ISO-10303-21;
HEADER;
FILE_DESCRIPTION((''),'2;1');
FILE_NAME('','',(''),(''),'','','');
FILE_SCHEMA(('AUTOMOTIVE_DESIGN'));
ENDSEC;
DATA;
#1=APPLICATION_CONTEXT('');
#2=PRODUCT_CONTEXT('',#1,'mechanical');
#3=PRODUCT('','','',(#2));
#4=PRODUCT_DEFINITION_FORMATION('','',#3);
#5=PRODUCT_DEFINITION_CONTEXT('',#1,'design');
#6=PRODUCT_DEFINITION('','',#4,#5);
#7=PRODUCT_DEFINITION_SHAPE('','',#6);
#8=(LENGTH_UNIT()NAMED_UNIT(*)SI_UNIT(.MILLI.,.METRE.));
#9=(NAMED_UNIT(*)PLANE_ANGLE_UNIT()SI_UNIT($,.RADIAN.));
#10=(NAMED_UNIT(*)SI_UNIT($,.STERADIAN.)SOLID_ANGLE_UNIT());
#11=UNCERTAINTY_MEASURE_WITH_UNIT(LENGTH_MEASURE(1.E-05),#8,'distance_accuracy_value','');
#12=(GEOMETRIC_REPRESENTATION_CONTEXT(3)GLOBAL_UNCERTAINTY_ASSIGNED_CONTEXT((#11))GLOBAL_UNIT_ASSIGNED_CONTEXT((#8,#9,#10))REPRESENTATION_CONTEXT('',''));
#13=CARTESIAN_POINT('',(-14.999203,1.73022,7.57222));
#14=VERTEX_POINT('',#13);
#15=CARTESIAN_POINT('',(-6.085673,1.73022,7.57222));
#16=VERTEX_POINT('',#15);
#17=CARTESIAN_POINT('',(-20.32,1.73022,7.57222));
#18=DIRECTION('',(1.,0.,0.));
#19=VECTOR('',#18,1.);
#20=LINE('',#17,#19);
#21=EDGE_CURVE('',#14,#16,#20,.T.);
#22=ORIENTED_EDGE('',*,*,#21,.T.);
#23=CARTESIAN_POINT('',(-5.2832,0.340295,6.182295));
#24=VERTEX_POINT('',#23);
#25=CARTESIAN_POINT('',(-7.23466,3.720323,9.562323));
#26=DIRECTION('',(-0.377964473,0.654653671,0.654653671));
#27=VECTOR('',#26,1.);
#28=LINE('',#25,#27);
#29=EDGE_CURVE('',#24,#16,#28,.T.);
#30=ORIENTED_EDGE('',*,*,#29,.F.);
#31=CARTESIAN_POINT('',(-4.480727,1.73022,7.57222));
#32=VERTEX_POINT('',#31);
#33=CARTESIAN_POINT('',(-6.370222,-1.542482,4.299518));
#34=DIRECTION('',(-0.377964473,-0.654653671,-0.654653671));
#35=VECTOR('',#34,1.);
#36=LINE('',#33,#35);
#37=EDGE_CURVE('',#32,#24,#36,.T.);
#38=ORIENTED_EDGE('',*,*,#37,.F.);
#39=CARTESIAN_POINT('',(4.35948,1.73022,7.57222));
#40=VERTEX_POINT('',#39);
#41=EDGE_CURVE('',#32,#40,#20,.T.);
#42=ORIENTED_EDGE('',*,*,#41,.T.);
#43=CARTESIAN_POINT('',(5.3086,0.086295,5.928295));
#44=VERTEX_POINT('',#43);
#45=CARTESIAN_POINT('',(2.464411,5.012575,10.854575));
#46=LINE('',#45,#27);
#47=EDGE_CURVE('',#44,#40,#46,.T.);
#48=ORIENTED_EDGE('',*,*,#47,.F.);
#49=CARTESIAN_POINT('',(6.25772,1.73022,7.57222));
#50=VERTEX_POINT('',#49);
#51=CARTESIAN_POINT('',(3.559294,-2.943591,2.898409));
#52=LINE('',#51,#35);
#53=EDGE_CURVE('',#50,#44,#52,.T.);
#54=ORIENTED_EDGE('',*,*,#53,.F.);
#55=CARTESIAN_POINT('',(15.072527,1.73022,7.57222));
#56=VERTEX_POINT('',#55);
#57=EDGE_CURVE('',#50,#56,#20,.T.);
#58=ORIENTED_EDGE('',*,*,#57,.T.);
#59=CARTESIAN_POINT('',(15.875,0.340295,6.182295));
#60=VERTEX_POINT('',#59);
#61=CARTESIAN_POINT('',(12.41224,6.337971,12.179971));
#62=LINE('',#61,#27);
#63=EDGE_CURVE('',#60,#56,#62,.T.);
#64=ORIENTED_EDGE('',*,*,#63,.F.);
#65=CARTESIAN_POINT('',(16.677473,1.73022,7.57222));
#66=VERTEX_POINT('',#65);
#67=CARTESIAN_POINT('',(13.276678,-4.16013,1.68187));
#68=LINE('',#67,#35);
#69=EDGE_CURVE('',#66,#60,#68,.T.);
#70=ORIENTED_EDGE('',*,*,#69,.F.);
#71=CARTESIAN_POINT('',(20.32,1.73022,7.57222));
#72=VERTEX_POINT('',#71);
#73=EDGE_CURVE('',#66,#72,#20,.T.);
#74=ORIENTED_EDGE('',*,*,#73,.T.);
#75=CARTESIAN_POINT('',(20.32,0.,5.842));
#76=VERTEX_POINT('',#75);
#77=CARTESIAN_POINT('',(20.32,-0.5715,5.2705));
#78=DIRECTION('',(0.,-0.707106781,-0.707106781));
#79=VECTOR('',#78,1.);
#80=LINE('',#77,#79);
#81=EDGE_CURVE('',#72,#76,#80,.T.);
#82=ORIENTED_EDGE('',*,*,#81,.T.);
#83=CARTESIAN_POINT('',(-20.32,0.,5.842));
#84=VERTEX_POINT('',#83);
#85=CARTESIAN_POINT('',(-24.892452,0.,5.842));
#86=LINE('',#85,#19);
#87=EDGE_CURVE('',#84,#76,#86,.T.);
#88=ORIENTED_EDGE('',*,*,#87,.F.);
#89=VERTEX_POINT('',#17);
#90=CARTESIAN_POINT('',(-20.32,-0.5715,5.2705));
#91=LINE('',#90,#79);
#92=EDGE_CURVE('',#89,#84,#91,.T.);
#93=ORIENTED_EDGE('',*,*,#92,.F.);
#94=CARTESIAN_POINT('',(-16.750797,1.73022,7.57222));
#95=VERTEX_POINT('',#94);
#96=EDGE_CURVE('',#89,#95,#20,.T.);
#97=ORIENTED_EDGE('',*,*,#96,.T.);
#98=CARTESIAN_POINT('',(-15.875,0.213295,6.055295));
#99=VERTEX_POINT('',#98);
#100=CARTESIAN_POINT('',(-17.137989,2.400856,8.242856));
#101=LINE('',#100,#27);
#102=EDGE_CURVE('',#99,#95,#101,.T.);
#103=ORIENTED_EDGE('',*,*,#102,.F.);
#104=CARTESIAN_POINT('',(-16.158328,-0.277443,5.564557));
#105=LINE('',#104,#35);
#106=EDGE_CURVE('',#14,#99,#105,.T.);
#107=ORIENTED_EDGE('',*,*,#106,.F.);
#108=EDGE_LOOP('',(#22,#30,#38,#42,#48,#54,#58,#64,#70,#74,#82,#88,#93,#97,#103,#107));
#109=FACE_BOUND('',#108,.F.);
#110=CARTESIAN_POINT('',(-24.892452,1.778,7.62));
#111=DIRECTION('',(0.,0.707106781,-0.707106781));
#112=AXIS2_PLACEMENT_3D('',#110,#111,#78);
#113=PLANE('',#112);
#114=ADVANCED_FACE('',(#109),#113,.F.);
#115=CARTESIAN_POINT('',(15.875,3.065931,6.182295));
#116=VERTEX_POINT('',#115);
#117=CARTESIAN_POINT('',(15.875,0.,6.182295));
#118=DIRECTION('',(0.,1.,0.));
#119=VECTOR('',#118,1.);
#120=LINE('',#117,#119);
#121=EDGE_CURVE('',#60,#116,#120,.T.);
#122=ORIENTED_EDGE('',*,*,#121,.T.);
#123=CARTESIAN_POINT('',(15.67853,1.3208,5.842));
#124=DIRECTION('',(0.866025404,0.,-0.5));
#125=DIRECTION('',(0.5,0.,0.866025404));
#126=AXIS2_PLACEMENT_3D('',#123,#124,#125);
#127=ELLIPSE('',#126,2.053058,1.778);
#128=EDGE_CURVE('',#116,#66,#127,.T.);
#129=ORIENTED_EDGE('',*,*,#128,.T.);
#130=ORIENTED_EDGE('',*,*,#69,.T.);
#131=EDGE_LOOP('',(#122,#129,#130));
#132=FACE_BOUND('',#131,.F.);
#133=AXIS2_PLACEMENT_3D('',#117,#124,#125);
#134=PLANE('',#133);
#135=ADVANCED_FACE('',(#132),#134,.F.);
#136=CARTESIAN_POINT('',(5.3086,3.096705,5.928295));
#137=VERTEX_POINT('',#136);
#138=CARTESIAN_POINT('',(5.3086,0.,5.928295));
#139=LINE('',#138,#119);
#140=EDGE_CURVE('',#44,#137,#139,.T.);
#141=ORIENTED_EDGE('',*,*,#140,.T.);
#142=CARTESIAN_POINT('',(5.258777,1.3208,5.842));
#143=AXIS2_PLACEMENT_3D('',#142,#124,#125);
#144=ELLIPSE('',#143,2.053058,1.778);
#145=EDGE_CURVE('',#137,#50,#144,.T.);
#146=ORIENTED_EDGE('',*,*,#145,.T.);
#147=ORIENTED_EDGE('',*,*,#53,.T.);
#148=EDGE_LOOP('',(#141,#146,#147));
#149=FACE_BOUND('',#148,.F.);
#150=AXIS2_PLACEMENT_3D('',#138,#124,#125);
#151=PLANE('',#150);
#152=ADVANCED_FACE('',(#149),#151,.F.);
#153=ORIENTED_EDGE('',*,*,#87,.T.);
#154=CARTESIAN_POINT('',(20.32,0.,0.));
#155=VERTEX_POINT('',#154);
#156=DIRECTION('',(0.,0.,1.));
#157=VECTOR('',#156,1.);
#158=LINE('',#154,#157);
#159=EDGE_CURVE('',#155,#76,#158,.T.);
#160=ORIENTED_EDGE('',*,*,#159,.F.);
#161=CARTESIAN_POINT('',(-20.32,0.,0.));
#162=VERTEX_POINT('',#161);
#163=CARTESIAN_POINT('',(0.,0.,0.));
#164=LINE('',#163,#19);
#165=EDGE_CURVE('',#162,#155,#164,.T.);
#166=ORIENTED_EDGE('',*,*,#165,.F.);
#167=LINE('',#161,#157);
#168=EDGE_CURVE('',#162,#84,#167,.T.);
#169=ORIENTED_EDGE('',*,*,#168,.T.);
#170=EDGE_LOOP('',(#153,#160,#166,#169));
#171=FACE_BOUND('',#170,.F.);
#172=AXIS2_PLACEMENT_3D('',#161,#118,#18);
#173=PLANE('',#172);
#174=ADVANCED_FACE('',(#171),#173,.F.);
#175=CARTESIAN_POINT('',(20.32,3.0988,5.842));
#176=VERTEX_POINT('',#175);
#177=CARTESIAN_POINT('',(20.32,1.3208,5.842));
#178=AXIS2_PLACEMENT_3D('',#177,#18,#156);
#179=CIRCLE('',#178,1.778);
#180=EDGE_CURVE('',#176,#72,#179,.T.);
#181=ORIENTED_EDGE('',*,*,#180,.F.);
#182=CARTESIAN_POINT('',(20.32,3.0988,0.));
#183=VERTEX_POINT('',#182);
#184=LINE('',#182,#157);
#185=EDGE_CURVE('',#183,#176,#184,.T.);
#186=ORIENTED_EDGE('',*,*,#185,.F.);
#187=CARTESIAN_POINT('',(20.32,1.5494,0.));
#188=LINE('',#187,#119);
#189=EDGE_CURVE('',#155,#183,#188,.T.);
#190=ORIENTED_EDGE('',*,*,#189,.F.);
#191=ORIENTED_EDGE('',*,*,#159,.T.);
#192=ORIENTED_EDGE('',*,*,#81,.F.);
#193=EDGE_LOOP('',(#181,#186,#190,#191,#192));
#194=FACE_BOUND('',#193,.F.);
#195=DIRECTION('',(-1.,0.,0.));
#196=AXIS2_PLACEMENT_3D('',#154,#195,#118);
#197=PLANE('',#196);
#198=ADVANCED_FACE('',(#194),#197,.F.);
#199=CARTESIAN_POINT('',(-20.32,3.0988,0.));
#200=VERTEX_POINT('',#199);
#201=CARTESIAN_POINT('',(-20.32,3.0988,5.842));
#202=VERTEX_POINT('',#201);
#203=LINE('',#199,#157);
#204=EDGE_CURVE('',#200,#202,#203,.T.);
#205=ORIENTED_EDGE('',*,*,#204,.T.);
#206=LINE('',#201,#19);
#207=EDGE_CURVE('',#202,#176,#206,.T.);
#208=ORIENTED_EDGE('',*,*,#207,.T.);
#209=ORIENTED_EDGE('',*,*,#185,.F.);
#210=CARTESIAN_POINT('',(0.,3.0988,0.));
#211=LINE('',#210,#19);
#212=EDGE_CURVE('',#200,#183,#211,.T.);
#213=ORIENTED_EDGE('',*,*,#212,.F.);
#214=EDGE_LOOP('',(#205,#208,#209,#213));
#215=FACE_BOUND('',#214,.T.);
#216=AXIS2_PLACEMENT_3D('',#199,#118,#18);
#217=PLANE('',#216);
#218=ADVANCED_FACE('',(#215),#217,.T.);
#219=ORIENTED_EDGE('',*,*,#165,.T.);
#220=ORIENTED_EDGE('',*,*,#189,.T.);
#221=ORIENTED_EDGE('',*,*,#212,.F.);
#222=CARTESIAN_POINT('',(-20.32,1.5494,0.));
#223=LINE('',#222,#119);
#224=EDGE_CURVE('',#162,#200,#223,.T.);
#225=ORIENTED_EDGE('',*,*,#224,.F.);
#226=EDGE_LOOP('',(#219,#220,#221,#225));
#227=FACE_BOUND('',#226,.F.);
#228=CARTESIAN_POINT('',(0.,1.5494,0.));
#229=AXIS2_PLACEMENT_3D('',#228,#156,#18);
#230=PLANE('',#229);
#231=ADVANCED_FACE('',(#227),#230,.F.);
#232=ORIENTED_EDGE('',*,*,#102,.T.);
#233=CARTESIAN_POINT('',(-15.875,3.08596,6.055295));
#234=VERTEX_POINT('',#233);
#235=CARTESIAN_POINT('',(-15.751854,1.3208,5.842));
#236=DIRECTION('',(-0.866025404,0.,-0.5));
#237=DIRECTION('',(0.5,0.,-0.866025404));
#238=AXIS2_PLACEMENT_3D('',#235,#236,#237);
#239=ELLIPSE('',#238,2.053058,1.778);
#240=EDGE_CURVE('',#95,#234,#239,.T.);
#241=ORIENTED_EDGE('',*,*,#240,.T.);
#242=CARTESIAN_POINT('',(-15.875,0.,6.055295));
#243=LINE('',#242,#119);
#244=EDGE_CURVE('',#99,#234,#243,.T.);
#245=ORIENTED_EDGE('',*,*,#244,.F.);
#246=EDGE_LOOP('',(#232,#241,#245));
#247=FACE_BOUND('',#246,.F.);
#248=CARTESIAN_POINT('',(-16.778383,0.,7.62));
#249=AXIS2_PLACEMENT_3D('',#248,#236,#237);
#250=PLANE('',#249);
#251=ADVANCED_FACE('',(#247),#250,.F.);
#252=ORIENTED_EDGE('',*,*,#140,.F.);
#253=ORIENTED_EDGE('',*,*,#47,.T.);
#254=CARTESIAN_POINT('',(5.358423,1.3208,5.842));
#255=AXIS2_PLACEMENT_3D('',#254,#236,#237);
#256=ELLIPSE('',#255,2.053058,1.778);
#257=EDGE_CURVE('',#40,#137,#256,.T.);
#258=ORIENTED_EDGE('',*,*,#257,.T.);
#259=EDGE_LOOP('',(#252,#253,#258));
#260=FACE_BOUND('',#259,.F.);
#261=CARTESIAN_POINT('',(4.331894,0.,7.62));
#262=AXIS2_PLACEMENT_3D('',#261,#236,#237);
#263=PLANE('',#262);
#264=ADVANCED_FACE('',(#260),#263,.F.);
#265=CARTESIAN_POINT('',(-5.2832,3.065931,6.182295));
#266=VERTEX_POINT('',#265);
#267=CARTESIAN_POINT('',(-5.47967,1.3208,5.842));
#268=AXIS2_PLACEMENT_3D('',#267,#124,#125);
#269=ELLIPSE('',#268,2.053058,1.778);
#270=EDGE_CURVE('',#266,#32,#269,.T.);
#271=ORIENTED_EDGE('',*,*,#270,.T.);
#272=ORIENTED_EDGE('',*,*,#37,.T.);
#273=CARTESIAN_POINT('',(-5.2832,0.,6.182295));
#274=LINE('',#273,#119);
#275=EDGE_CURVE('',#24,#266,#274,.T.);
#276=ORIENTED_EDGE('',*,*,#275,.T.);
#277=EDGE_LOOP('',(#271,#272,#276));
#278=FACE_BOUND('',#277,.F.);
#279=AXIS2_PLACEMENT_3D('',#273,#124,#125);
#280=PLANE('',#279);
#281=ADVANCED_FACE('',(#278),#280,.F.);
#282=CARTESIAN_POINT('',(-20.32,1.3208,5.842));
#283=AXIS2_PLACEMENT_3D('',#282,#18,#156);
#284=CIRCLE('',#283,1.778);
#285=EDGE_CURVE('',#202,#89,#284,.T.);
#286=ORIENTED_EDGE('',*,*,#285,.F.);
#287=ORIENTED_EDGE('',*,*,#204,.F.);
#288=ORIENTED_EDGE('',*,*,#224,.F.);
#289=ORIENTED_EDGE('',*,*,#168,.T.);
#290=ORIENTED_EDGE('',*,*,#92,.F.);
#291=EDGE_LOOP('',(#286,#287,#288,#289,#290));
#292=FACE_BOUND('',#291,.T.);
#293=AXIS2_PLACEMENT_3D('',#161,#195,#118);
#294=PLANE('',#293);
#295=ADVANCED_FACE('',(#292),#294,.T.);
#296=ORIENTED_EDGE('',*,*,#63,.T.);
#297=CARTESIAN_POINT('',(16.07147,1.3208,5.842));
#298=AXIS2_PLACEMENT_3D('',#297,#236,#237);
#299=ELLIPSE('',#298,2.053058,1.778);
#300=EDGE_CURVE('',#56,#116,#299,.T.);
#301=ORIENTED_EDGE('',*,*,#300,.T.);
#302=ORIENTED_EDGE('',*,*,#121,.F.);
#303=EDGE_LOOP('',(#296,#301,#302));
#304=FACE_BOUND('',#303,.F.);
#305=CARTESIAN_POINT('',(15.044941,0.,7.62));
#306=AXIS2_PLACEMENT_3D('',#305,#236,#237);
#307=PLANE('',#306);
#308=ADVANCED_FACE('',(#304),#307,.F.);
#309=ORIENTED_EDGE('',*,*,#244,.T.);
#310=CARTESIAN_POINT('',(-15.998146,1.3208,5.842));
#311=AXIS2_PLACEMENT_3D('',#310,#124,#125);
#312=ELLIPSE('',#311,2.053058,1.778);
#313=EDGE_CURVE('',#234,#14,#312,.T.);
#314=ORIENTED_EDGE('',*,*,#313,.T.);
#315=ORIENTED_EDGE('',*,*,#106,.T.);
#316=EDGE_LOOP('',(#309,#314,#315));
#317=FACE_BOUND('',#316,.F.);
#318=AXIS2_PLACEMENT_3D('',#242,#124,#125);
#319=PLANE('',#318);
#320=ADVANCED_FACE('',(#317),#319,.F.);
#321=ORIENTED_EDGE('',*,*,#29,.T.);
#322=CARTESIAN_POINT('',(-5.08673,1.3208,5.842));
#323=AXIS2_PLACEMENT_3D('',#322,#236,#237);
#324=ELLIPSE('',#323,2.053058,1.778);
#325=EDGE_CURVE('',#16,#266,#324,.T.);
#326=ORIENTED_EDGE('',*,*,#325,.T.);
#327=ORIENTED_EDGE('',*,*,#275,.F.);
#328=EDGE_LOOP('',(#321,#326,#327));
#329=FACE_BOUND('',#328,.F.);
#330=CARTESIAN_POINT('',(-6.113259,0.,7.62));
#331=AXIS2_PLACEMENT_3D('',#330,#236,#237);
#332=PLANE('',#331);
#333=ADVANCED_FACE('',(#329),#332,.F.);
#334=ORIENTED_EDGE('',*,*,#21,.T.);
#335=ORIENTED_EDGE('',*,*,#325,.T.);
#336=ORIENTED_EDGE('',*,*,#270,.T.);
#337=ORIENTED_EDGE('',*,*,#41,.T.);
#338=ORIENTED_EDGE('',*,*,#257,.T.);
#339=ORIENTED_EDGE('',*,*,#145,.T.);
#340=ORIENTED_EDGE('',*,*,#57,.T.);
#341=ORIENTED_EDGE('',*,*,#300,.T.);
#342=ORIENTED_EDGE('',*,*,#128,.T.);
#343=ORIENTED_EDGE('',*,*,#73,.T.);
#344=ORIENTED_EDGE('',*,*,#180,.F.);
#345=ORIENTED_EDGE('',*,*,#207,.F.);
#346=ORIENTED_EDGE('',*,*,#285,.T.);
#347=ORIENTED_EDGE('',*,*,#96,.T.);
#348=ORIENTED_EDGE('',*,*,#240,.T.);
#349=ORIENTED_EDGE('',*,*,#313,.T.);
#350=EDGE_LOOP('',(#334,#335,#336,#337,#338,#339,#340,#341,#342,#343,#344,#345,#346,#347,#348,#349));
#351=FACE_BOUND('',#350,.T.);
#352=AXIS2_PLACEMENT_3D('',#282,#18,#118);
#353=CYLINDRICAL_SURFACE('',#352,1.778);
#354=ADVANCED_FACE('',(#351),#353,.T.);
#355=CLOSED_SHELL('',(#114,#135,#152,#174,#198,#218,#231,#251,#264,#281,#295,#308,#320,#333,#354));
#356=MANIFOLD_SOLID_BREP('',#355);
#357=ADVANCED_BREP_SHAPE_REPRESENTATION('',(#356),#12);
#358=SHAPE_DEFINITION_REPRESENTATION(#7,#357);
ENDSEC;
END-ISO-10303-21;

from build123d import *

# Parameters (mm, degrees)
F0_W        = 40.64
F0_H        = 3.0988
F1_DEPTH    = 7.62
F3_R        = 1.778
F4_T1_DEPTH = 49.7849047052
F5_DEPTH    = 25.4


# Not quite as in the source:
# - a fillet or chamfer that OpenCascade refuses, or shapes differently, is made with other operations: its cross-section is extruded or revolved along the edge and cut away or added


with BuildPart() as f1:
    # F0 (on Top) → F1 (new body)
    with BuildSketch(Plane.XY):
        with Locations((0, 1.5494)):
            Rectangle(F0_W, F0_H)
    extrude(amount=F1_DEPTH)

    # F3
    f3_edges = [f1.edges().sort_by_distance(p)[0] for p in [
        (0, 3.0988, 7.62),
    ]]
    fillet(f3_edges, radius=F3_R)

    # F4: chamfer of 1.778 on 1 edges, made by hand

    # F4_s2 → F4_t1 (cut)
    with BuildSketch(Plane.YZ.offset(-24.8924523526)):
        Polygon((1.778, 7.62), (0, 5.842), (0, 7.62), align=None)
    extrude(amount=F4_T1_DEPTH, mode=Mode.SUBTRACT)

    # F2 (on face) → F5 (cut)
    with BuildSketch(Plane.XZ):
        Polygon((-15.875, 6.0552954744), (-14.9716174209, 7.62), (-16.7783825791, 7.62), align=None)
        Polygon((-4.4531409051, 7.62), (-6.1132590949, 7.62), (-5.2832, 6.1822954744), align=None)
        Polygon((6.2853060633, 7.62), (4.3318939367, 7.62), (5.3086, 5.9282954744), align=None)
        Polygon((16.7050590949, 7.62), (15.0449409051, 7.62), (15.875, 6.1822954744), align=None)
    extrude(amount=-F5_DEPTH, mode=Mode.SUBTRACT)


solid = f1.part
